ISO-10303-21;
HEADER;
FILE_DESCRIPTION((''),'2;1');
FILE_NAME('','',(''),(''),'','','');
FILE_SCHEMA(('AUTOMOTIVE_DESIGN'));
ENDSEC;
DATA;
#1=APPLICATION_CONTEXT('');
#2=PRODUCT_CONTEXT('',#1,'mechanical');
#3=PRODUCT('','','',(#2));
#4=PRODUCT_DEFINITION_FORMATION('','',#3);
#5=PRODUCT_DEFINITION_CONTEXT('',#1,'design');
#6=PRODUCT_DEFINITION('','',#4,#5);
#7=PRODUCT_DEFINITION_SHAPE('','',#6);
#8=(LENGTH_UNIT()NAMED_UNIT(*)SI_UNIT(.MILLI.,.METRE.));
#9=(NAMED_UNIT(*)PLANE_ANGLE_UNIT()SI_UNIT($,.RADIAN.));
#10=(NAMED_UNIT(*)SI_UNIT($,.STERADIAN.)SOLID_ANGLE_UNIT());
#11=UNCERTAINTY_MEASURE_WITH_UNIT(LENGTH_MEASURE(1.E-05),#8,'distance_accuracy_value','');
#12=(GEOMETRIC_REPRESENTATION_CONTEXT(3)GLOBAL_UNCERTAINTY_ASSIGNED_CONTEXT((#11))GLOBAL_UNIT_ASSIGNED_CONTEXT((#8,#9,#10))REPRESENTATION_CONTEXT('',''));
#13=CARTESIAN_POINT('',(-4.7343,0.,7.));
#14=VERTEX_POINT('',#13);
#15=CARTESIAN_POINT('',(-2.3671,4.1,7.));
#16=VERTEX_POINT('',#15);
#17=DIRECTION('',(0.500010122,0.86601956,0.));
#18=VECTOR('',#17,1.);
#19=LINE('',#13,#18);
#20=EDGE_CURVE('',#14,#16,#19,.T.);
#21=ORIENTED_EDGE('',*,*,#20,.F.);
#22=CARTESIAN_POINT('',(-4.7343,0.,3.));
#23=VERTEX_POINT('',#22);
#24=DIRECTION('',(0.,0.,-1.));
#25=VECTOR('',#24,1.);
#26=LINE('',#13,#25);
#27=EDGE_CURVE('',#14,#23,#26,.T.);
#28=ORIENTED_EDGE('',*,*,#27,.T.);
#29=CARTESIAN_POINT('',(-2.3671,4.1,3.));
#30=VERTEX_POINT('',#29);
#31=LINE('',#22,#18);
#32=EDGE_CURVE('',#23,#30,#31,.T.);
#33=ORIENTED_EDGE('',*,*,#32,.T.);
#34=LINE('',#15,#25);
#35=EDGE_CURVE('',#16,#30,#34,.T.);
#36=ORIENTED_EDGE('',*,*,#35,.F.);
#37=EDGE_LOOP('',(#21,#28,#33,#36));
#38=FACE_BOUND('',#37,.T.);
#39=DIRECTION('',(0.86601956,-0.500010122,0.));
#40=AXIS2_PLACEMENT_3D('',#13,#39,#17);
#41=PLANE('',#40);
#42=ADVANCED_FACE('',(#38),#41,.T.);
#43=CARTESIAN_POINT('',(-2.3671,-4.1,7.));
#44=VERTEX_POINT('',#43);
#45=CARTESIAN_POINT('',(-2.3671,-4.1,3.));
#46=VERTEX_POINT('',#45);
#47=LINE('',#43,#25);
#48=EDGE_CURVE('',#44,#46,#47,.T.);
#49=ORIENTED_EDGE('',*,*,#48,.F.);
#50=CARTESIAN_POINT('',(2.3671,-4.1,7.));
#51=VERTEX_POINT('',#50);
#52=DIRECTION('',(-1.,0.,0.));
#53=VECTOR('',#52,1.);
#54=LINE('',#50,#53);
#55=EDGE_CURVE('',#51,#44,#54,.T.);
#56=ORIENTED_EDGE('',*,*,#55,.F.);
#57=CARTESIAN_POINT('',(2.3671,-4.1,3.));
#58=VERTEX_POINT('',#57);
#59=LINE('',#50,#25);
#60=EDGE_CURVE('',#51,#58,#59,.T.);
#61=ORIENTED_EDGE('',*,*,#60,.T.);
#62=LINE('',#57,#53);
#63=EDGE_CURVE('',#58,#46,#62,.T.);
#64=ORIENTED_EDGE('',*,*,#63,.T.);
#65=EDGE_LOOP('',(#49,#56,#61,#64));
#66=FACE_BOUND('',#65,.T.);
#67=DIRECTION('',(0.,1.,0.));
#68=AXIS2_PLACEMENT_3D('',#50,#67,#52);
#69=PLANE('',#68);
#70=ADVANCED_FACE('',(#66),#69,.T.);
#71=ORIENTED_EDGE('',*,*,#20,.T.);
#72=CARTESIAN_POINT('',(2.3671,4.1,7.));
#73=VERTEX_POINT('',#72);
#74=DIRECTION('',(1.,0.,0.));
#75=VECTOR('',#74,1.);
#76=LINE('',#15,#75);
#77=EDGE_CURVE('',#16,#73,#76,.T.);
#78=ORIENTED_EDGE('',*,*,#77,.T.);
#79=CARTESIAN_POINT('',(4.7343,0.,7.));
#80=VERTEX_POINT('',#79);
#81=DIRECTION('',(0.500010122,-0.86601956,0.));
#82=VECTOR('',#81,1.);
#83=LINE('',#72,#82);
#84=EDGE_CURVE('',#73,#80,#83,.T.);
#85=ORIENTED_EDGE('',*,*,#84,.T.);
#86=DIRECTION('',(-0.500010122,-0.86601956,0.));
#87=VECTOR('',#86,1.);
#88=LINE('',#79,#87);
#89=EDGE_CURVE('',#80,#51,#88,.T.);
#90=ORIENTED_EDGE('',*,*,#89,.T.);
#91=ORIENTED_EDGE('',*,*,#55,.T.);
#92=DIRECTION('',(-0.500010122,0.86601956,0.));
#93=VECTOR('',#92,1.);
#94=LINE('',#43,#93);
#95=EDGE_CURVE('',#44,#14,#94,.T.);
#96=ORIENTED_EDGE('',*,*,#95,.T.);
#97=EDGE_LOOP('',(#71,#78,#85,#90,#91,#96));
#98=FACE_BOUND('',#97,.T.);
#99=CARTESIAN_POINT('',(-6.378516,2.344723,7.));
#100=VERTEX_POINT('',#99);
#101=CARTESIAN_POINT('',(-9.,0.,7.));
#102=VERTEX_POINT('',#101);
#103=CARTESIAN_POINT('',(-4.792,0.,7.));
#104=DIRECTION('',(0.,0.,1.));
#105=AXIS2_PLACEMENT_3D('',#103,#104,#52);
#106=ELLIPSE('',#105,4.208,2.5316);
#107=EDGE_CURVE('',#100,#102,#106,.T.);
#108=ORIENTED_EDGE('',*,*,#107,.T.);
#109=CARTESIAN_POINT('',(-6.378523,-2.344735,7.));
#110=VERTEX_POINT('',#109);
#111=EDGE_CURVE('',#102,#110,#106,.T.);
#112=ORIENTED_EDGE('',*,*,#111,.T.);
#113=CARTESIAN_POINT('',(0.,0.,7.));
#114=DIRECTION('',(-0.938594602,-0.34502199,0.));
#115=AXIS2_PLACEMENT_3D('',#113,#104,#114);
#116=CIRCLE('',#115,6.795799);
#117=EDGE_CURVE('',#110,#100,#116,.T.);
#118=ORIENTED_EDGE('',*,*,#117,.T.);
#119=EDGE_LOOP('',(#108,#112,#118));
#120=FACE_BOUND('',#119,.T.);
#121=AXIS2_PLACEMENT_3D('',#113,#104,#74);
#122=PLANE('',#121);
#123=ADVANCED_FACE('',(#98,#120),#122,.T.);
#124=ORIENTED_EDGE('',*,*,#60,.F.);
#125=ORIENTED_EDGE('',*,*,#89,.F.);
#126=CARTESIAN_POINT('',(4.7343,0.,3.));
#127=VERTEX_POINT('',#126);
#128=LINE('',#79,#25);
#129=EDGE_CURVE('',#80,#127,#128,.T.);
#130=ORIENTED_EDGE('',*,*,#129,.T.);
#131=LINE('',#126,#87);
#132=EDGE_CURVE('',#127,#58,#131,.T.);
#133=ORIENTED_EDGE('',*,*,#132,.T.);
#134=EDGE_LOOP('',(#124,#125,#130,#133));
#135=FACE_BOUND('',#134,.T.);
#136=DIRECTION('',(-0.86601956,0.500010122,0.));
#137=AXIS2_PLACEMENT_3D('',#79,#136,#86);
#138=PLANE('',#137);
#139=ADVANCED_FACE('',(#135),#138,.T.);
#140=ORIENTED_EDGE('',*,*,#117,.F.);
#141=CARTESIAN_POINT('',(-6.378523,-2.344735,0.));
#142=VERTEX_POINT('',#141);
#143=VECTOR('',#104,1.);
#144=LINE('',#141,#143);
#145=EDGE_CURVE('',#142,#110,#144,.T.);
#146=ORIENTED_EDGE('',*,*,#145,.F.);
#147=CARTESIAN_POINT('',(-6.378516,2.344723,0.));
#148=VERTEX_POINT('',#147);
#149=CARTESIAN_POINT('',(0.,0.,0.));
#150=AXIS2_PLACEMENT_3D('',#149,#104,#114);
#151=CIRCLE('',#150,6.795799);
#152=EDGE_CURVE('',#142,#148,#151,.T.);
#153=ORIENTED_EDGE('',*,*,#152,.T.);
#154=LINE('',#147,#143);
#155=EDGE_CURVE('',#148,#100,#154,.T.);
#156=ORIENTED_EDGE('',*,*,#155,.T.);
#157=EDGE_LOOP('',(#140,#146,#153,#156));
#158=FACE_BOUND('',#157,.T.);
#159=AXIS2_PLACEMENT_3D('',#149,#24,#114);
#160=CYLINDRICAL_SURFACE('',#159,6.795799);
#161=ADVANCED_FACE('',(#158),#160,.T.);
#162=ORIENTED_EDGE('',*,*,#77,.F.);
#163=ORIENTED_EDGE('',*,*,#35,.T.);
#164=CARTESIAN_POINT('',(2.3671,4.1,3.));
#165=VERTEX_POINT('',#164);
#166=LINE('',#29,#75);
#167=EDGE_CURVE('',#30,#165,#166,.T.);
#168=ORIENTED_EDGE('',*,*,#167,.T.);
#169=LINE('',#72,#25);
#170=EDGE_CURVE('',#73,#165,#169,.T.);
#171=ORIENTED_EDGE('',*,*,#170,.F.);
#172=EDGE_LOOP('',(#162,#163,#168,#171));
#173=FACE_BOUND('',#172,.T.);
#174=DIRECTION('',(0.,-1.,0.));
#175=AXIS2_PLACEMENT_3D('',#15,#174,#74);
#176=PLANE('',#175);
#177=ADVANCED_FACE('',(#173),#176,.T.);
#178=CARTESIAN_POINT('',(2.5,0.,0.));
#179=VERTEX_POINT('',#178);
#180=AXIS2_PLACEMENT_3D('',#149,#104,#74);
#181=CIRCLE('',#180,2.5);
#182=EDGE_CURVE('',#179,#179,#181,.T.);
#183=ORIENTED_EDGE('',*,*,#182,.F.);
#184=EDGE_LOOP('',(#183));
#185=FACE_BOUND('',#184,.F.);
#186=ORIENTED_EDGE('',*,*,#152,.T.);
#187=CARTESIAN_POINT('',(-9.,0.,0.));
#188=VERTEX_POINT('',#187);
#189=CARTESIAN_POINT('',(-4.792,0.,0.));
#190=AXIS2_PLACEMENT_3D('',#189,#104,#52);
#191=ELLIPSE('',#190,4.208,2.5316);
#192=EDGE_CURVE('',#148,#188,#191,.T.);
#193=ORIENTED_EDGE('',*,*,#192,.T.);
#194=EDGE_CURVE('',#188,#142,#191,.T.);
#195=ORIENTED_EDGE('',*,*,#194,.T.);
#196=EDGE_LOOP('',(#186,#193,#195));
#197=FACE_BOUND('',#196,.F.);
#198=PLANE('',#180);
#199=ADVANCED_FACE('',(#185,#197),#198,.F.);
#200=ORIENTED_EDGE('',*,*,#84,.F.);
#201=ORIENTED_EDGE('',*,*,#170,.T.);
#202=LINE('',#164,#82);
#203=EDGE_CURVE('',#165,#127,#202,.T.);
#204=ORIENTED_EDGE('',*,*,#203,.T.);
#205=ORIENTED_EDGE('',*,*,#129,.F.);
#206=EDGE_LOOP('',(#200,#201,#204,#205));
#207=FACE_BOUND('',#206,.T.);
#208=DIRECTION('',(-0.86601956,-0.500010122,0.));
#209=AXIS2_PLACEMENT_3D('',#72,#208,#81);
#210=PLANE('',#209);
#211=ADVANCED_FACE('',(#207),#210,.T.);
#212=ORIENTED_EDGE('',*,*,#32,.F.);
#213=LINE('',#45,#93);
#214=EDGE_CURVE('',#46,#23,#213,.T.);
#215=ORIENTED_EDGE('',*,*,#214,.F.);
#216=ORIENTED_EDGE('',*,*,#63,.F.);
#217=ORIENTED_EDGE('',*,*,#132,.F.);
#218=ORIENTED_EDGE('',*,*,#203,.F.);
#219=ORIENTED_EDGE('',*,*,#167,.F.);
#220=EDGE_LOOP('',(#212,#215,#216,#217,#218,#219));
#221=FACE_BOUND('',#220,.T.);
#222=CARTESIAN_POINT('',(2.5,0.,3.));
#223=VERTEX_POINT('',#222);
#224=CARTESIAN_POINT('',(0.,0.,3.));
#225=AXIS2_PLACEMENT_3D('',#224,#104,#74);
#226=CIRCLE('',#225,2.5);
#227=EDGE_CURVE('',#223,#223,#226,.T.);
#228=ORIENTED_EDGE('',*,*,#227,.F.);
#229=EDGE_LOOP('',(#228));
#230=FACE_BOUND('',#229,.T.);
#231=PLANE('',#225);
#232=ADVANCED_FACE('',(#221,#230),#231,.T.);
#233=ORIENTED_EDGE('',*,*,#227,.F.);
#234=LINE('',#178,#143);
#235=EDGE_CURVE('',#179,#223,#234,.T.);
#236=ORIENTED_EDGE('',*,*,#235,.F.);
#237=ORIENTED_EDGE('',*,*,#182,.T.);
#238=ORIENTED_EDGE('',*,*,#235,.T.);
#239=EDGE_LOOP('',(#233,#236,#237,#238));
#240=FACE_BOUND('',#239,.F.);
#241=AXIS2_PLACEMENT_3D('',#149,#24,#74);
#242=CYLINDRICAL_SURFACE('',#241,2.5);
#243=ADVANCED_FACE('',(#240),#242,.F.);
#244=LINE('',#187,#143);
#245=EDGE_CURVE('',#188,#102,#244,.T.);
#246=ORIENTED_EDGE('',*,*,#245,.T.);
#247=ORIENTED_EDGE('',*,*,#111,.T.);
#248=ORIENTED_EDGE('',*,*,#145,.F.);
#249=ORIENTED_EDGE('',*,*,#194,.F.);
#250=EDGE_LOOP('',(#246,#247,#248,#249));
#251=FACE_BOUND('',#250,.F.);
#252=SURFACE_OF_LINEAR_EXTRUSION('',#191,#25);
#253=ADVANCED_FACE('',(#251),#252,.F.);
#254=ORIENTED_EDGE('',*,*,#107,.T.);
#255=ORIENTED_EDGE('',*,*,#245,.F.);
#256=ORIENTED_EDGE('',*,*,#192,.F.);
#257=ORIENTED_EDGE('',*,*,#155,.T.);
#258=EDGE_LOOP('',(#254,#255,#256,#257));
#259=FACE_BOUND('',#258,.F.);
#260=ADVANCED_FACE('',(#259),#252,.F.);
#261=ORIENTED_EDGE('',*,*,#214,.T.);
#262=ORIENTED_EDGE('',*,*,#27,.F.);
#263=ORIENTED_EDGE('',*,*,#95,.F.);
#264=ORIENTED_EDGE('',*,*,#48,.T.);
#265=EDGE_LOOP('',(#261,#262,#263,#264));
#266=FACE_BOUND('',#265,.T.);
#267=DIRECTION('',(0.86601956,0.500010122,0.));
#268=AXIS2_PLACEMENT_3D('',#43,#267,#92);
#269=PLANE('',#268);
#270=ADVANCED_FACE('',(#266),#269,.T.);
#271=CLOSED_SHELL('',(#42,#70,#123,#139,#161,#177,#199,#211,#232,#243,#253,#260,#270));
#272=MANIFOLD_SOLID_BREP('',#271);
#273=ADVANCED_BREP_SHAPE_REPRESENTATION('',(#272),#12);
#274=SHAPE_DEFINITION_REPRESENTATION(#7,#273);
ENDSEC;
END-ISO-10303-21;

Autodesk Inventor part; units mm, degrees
ref_plane "YZ Plane" through (0, 0, 0) normal (1, 0, 0) x (0, 1, 0)
ref_plane "XZ Plane" through (0, 0, 0) normal (0, 1, 0) x (-1, 0, 0)
ref_plane "XY Plane" through (0, 0, 0) normal (0, 0, 1) x (1, 0, 0)
sketch "Sketch1" plane through (0, 0, 0) normal (0, 0, 1) x (1, 0, 0)
  line L0 (-2.5, 0) -> (-9, 0)
  ellipse E0 centre (-4.792, 0) end of major axis (-9, 0) minor radius 2.5316 (-6.3785, 2.3447) -> (-6.3785, -2.3447) ccw
  arc A0 (-6.3785, -2.3447) -> (-6.3785, 2.3447) centre (0, 0) ccw
  line L1 (-6.3785, 2.3447) -> (-6.225, 2.482)
  circle A1 centre (0, 0) radius 2.5
  dimension "d2" = 6.5
  dimension "d4" = 5
extrude "Extrusion1" add sketch "Sketch1" along normal blind 7
sketch "Sketch2" plane through (0, 0, 7) normal (0, 0, 1) x (1, 0, 0)
  circle A0 centre (0, 0) radius 2.5 projected
  arc A1 (-6.3785, -2.3447) -> (-6.3785, 2.3447) centre (0, 0) ccw projected
  line L0 (4.7343, 0) -> (2.3671, -4.1)
  line L1 (2.3671, -4.1) -> (-2.3671, -4.1)
  line L2 (-2.3671, -4.1) -> (-4.7343, 0)
  line L3 (-4.7343, 0) -> (-2.3671, 4.1)
  line L4 (-2.3671, 4.1) -> (2.3671, 4.1)
  line L5 (2.3671, 4.1) -> (4.7343, 0)
  dimension "d7" = 8.2
extrude "Extrusion2" cut sketch "Sketch2" against normal blind 4
properties part number "cam4.0"
